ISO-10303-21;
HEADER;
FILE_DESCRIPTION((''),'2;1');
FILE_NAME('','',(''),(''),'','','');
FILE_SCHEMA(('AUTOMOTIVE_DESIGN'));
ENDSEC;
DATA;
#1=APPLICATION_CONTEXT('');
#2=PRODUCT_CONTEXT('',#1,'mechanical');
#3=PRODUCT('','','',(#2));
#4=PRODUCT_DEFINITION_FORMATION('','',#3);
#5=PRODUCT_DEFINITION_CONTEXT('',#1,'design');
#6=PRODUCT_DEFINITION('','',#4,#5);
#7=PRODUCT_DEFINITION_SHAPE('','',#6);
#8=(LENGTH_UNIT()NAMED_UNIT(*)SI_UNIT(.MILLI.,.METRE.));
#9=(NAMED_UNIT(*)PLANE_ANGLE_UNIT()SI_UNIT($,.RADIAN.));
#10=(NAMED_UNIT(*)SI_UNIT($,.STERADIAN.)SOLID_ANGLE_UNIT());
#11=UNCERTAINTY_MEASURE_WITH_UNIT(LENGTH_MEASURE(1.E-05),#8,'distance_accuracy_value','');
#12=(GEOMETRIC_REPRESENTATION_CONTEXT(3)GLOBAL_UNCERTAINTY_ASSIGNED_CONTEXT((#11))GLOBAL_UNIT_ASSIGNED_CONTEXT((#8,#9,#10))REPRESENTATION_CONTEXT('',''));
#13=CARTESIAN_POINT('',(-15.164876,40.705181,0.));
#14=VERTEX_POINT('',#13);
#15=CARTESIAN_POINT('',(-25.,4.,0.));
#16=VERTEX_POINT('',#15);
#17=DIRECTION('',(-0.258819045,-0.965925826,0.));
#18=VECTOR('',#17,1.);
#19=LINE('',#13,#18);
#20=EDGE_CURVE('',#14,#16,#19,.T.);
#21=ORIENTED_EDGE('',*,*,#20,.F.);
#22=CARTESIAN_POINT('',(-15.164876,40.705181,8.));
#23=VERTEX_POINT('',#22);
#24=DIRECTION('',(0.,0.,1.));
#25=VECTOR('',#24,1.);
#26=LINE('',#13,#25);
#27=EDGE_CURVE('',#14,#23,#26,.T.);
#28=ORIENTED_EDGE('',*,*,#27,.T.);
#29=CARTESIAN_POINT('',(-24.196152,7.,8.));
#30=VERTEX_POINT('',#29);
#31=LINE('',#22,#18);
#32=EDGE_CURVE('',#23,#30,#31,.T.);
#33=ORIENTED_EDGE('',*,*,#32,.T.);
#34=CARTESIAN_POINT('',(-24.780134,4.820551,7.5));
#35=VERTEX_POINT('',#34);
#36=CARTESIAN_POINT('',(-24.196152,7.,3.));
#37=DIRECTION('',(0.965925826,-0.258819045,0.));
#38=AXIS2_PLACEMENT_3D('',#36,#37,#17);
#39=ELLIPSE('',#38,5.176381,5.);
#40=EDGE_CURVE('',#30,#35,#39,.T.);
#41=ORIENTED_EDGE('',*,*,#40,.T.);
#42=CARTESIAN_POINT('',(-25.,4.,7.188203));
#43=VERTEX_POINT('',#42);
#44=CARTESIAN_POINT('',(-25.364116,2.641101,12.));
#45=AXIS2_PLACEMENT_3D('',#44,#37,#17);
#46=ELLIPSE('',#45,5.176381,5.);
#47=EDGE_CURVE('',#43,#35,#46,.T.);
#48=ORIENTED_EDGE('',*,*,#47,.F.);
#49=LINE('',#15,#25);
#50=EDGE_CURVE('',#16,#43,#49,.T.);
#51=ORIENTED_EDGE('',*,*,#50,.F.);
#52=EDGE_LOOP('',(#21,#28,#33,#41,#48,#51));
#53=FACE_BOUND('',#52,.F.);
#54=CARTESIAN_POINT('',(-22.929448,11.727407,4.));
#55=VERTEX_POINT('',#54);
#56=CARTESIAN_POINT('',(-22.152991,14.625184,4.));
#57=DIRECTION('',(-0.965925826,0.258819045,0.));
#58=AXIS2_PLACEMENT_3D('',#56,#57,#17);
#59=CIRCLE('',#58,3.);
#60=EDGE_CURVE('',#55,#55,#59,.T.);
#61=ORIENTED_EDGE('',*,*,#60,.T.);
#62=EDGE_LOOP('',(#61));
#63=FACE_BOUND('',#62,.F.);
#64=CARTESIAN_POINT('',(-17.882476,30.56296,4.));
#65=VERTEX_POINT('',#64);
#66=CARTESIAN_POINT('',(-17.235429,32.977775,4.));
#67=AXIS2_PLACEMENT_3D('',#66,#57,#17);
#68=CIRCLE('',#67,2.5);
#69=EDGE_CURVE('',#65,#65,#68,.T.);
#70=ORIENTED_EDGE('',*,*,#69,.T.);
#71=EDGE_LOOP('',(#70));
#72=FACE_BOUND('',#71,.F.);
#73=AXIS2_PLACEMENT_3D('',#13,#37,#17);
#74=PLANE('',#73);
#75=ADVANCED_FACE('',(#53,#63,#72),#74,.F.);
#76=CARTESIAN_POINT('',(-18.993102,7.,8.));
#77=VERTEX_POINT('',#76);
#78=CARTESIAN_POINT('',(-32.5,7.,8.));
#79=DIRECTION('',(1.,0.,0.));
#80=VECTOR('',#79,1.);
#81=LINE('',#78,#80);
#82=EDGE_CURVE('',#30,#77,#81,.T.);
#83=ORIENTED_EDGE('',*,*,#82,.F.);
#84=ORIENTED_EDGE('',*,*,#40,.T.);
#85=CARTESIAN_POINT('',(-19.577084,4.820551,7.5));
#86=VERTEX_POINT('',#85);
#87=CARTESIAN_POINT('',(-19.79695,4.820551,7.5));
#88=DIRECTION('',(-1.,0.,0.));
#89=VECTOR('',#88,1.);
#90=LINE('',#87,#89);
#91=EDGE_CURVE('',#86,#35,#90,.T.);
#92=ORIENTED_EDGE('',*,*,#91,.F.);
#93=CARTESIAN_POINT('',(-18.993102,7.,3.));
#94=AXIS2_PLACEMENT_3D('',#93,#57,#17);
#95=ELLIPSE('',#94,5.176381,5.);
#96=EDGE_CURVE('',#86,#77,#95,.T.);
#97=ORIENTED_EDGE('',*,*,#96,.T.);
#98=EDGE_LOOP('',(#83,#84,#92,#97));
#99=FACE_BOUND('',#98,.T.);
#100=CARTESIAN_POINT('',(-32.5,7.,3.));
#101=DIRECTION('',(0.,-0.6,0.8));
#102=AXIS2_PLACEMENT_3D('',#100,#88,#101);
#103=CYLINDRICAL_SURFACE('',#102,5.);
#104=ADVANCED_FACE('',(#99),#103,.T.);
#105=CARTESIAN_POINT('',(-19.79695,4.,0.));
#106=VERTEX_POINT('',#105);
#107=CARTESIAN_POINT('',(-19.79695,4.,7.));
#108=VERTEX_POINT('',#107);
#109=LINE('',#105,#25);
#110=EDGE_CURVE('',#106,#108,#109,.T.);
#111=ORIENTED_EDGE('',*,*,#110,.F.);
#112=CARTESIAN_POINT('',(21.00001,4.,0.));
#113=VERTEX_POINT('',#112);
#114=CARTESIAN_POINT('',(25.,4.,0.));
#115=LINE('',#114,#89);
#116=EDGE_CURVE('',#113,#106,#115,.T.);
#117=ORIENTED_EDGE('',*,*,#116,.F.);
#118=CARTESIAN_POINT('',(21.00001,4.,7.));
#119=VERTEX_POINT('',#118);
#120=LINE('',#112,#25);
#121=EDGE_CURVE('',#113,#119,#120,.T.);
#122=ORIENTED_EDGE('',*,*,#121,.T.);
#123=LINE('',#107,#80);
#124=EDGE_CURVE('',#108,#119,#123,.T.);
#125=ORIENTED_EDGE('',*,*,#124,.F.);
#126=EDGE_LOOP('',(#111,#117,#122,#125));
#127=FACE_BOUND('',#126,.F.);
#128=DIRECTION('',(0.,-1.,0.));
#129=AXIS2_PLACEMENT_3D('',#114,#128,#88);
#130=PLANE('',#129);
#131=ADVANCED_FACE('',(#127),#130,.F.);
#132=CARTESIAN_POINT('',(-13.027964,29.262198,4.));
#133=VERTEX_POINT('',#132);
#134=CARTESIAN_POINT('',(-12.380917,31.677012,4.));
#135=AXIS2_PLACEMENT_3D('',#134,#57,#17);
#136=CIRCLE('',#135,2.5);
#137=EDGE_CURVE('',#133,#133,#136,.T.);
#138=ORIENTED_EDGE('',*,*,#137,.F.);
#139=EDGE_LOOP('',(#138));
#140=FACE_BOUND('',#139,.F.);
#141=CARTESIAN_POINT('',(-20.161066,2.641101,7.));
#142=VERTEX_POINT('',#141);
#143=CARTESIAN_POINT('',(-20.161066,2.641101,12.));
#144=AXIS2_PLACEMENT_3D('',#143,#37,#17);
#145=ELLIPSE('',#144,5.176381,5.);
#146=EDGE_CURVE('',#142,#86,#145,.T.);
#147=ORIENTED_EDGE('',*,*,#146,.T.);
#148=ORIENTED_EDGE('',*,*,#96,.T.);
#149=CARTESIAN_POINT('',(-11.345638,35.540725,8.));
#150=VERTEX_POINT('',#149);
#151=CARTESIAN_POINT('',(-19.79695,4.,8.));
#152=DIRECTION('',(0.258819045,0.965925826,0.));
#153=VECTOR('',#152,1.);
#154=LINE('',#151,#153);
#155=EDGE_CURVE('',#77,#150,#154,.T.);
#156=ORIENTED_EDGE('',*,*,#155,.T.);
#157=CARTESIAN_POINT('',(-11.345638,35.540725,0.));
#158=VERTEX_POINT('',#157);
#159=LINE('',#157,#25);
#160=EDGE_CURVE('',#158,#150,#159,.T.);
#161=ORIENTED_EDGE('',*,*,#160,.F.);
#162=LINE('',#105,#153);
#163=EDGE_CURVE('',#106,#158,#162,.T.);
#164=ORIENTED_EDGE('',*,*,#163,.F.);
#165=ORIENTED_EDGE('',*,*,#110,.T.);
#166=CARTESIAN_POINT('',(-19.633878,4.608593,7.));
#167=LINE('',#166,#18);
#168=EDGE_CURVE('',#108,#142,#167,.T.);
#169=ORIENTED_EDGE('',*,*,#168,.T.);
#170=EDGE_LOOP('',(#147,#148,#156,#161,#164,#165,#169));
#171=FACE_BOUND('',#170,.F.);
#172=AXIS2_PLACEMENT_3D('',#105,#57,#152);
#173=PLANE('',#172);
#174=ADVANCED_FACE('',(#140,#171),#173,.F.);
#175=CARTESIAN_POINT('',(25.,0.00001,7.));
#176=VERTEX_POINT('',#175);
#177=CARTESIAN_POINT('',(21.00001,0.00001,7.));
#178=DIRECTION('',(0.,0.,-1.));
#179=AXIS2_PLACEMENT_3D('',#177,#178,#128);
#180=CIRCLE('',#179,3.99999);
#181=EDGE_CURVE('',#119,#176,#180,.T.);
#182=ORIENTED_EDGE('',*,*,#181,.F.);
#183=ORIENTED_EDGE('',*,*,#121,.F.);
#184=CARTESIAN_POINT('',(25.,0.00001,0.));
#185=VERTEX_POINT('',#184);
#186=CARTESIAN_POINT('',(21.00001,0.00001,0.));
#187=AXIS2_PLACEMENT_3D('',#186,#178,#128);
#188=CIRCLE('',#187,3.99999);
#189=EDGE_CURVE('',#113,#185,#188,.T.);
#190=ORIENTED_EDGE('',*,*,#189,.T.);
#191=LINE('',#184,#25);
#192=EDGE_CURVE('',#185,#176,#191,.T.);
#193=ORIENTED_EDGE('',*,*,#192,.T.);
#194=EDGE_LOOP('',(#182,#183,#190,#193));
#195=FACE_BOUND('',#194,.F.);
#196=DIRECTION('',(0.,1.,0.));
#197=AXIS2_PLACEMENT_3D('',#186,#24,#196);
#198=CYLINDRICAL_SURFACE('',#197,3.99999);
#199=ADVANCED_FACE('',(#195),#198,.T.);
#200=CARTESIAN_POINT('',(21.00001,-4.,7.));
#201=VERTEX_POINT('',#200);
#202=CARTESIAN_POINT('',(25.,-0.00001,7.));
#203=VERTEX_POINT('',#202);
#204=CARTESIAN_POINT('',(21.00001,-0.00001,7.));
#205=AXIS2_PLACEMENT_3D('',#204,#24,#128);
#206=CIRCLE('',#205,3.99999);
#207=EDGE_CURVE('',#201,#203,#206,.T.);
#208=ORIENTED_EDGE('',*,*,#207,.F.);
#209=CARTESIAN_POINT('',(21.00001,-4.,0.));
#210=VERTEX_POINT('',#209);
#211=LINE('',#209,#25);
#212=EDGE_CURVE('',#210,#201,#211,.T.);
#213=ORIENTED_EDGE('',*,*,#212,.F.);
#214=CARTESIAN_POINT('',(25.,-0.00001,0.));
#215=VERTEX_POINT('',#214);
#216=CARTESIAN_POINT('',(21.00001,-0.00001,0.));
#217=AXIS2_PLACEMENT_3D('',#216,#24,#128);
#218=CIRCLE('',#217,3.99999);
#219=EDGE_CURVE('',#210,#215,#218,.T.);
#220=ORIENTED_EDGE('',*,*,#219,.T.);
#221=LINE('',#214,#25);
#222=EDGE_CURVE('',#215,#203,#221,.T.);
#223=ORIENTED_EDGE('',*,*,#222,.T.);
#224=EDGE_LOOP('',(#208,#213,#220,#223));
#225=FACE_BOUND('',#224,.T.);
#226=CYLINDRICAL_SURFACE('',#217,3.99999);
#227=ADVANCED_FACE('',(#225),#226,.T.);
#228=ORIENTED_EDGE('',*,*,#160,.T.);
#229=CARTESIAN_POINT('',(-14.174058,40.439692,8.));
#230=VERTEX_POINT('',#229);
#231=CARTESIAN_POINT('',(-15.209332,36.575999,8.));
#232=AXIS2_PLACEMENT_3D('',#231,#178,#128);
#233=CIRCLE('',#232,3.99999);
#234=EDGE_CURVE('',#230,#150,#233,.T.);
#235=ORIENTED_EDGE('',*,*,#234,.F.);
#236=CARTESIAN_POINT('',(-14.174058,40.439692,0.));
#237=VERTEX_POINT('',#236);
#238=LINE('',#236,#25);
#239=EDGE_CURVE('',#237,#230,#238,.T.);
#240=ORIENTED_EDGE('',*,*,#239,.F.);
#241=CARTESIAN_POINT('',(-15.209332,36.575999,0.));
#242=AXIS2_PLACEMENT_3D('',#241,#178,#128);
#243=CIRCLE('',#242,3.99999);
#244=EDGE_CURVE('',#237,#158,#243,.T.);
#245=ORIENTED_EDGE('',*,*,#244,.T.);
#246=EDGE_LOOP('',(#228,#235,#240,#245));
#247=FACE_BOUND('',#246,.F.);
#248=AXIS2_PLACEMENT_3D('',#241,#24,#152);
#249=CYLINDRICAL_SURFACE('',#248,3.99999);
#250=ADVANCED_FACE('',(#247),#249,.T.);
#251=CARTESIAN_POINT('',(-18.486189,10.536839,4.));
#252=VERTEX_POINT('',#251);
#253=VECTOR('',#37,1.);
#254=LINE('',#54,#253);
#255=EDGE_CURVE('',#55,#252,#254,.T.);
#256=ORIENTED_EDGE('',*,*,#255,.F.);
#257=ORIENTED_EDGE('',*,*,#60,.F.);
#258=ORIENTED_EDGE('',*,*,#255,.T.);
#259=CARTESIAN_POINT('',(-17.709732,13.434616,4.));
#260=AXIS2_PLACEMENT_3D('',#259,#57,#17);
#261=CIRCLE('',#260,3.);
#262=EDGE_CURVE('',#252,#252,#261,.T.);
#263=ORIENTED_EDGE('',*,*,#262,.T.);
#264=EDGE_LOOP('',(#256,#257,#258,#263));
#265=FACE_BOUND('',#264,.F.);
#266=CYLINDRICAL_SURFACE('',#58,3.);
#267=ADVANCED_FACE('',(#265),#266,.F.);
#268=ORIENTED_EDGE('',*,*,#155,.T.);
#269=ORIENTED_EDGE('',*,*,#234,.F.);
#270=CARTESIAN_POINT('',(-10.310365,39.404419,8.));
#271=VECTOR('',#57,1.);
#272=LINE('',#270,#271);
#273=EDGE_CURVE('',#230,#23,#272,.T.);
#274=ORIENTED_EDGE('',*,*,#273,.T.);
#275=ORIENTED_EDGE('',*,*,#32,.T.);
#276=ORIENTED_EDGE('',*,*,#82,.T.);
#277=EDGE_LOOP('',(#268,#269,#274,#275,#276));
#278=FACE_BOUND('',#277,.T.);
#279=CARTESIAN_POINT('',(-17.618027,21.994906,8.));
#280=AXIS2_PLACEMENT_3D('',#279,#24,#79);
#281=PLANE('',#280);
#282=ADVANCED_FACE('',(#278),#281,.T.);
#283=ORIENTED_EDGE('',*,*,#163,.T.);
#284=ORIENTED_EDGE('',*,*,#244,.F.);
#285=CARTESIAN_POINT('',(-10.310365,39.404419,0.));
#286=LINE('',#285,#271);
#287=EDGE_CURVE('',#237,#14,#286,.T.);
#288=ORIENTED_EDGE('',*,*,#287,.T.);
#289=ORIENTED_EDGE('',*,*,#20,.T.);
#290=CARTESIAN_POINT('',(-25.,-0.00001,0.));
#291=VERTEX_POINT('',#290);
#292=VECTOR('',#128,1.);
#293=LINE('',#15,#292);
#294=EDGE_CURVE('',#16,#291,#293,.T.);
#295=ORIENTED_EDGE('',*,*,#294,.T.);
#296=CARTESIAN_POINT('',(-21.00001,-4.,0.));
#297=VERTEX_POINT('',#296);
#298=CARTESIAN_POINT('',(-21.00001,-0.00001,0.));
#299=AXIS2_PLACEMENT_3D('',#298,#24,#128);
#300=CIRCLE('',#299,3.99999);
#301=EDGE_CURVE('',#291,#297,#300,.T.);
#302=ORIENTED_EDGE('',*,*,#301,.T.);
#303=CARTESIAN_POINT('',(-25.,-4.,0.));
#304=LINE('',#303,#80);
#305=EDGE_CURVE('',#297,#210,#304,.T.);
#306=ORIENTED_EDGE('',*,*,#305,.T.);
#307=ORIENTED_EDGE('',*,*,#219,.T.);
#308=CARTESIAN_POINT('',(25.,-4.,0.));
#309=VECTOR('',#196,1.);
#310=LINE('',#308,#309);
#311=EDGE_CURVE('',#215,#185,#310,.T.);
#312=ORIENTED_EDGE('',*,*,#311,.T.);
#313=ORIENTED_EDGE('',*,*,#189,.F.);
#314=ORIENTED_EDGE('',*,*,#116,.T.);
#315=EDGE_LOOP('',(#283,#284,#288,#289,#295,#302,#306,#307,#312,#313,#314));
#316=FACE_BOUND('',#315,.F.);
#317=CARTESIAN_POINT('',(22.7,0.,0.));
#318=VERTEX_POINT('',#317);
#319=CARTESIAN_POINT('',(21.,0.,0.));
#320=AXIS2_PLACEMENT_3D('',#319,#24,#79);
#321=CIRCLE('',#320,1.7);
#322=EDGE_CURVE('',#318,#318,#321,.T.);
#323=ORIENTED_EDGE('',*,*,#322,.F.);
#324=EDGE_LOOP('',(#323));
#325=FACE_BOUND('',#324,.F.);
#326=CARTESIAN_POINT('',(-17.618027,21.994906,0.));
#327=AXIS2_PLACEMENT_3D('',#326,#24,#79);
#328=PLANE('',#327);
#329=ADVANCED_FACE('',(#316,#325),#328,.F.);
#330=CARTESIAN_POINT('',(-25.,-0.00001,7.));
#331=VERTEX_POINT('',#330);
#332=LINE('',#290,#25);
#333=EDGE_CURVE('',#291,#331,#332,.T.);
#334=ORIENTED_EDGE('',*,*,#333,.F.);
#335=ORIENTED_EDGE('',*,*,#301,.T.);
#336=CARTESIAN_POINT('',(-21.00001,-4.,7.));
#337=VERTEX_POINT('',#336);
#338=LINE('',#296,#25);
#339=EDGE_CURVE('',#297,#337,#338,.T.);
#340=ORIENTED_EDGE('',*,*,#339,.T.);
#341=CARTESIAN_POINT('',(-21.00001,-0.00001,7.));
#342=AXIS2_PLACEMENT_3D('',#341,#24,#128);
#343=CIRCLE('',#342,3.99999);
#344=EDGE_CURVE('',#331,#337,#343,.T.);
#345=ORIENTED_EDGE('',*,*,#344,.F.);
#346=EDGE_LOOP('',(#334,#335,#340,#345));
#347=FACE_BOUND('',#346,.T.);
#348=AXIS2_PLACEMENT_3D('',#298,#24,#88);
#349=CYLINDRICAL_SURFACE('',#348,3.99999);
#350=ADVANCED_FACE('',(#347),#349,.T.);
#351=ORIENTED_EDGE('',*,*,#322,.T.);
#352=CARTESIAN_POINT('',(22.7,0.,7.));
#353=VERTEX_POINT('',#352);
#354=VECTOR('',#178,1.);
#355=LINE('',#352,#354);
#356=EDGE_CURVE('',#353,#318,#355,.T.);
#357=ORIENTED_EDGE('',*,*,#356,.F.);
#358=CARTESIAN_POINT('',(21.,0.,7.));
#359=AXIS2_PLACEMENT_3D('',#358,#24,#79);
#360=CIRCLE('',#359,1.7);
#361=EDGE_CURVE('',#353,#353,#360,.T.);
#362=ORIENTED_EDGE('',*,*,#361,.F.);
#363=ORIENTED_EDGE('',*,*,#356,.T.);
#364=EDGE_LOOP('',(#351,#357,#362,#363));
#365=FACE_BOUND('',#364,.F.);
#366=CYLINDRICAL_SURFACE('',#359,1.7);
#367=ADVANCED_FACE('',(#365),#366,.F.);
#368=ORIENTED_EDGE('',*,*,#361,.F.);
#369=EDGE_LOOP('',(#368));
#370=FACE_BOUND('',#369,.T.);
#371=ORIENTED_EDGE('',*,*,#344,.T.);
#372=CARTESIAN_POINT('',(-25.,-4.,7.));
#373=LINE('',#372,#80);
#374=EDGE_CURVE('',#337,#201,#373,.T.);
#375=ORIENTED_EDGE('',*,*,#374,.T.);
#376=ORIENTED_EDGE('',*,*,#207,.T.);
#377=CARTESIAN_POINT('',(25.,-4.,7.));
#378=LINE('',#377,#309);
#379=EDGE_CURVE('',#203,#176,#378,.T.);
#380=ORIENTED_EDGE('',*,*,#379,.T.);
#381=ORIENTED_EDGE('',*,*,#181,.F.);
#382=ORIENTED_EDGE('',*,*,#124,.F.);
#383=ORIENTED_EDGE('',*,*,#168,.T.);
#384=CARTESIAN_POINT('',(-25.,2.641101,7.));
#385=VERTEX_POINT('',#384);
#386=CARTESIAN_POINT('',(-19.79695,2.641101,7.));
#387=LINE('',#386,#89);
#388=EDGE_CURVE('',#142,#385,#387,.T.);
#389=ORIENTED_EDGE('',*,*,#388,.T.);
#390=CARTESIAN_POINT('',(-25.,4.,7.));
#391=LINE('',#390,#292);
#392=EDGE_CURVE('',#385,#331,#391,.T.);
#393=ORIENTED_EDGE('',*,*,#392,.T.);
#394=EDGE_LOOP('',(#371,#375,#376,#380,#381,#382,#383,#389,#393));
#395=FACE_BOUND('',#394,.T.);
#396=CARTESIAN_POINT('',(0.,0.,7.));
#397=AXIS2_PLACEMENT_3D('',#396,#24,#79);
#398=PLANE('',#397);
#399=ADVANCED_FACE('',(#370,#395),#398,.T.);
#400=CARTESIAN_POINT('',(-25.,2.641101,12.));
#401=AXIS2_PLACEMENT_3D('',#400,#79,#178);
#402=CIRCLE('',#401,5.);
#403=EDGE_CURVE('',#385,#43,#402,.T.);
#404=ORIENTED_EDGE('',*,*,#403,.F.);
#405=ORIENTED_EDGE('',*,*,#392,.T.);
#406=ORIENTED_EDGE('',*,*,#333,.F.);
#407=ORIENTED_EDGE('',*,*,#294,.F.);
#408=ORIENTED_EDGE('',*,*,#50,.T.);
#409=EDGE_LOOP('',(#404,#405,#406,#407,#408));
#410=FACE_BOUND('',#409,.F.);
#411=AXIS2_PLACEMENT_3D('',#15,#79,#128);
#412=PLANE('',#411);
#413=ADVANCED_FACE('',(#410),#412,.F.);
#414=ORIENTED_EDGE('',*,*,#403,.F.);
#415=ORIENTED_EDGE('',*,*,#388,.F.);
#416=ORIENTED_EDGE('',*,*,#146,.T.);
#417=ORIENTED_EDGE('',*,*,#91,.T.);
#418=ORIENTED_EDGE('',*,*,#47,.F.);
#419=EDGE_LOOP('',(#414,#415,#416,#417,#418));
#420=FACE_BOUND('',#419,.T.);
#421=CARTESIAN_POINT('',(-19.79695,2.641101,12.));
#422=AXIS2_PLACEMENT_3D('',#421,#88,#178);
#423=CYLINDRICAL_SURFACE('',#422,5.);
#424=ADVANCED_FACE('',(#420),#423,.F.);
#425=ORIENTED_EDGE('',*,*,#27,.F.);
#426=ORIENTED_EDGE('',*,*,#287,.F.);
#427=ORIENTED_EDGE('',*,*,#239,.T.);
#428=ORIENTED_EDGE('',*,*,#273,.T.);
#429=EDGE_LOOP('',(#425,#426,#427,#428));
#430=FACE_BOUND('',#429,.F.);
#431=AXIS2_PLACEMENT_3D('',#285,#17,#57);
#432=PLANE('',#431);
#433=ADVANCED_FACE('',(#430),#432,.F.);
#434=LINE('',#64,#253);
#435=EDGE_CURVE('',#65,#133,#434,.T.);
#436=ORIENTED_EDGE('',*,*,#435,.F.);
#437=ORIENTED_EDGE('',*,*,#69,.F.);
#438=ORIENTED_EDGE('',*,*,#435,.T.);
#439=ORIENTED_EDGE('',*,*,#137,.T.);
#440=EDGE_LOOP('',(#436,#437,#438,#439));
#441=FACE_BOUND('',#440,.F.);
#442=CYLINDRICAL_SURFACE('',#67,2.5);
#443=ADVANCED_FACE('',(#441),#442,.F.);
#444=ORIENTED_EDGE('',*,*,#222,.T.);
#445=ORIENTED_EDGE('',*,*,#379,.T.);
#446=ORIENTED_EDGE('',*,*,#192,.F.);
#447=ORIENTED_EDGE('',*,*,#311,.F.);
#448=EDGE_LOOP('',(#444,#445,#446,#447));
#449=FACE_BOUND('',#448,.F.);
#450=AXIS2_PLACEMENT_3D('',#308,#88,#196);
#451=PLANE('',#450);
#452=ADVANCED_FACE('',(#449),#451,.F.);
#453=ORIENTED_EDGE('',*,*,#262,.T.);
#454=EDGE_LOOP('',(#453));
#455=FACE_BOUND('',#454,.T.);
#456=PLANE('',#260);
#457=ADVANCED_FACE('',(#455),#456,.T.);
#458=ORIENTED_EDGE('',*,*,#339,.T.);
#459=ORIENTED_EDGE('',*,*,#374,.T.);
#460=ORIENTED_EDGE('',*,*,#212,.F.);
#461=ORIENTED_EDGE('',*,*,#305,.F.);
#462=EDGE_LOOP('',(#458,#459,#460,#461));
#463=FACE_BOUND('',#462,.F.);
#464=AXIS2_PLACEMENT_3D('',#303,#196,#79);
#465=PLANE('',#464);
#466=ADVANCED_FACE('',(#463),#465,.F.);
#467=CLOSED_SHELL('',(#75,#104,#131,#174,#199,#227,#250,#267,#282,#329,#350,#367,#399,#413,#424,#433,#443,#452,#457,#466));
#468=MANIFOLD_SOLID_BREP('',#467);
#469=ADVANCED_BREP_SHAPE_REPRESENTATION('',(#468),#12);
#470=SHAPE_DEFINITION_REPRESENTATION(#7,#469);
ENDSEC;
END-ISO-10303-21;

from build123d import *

# Parameters (mm, degrees)
F1_DEPTH    = 7
F2_DEPTH    = 8
F3_R        = 3.99999
F4_T1_DEPTH = 20.2030500331
F5_R        = 5
F6_R        = 2.5
F7_DEPTH    = 10
F6_R_2      = 3
F8_DEPTH    = 4.6
F9_R        = 1.7
F10_DEPTH   = 7.001


# Not quite as in the source:
# - a fillet or chamfer that OpenCascade refuses, or shapes differently, is made with other operations: its cross-section is extruded or revolved along the edge and cut away or added
# - a fillet or chamfer is up to 0.001 mm smaller than in the source, because OpenCascade refuses the exact size


with BuildPart() as f1:
    # F0 (on Top) → F1 (new body)
    with BuildSketch(Plane.XY):
        Polygon((-25, -4), (25, -4), (25, 4), (-19.7969499669, 4), (-25, 4), align=None)
    extrude(amount=F1_DEPTH)

    # F0 (on Top) → F2 (join)
    with BuildSketch(Plane.XY):
        Polygon((-15.1648762861, 40.705181399), (-25, 4), (-19.7969499669, 4), (-10.3103645166, 39.4044188907), align=None)
    extrude(amount=F2_DEPTH)

    # F3 (radius 4 in the source; OpenCascade refuses exactly that, so slightly less here)
    f3_edges = [f1.edges().sort_by_distance(p)[0] for p in [
        (25, 4, 3.5),
        (25, -4, 3.5),
        (-25, -4, 3.5),
        (-10.310365, 39.404419, 4),
    ]]
    fillet(f3_edges, radius=F3_R)

    # F4: fillet of radius 5 on 1 edges, made by hand

    # F4_s2 → F4_t1 (cut)
    with BuildSketch(Plane.YZ.offset(-32.5)):
        with BuildLine():
            ThreePointArc((4, 7), (5.4188611699, 7.7434164903), (7, 8))
            Line((7, 8), (4, 8))
            Line((4, 8), (4, 7))
        make_face()
    extrude(amount=F4_T1_DEPTH, mode=Mode.SUBTRACT)

    # F5
    f5_edges = [f1.edges().sort_by_distance(p)[0] for p in [
        (-22.398475, 4, 7),
    ]]
    fillet(f5_edges, radius=F5_R)

    # F6 (on face) → F7 (cut)
    with BuildSketch(Plane(origin=(-24.3253175473, 6.5179491924, 0), x_dir=(-0.2588190451, -0.9659258263, 0), z_dir=(-0.9659258263, 0.2588190451, 0))):
        with Locations((-27.3932271776, 4)):
            Circle(F6_R)
    extrude(amount=-F7_DEPTH, mode=Mode.SUBTRACT)

    # F6 (on face) → F8 (cut)
    with BuildSketch(Plane(origin=(-24.3253175473, 6.5179491924, 0), x_dir=(-0.2588190451, -0.9659258263, 0), z_dir=(-0.9659258263, 0.2588190451, 0))):
        with Locations((-8.3932271776, 4)):
            Circle(F6_R_2)
    extrude(amount=-F8_DEPTH, mode=Mode.SUBTRACT)

    # F9 (on face) → F10 (cut, through all)
    with BuildSketch(Plane.XY.offset(7)):
        with Locations((21, 0)):
            Circle(F9_R)
    extrude(amount=-F10_DEPTH, mode=Mode.SUBTRACT)


solid = f1.part
